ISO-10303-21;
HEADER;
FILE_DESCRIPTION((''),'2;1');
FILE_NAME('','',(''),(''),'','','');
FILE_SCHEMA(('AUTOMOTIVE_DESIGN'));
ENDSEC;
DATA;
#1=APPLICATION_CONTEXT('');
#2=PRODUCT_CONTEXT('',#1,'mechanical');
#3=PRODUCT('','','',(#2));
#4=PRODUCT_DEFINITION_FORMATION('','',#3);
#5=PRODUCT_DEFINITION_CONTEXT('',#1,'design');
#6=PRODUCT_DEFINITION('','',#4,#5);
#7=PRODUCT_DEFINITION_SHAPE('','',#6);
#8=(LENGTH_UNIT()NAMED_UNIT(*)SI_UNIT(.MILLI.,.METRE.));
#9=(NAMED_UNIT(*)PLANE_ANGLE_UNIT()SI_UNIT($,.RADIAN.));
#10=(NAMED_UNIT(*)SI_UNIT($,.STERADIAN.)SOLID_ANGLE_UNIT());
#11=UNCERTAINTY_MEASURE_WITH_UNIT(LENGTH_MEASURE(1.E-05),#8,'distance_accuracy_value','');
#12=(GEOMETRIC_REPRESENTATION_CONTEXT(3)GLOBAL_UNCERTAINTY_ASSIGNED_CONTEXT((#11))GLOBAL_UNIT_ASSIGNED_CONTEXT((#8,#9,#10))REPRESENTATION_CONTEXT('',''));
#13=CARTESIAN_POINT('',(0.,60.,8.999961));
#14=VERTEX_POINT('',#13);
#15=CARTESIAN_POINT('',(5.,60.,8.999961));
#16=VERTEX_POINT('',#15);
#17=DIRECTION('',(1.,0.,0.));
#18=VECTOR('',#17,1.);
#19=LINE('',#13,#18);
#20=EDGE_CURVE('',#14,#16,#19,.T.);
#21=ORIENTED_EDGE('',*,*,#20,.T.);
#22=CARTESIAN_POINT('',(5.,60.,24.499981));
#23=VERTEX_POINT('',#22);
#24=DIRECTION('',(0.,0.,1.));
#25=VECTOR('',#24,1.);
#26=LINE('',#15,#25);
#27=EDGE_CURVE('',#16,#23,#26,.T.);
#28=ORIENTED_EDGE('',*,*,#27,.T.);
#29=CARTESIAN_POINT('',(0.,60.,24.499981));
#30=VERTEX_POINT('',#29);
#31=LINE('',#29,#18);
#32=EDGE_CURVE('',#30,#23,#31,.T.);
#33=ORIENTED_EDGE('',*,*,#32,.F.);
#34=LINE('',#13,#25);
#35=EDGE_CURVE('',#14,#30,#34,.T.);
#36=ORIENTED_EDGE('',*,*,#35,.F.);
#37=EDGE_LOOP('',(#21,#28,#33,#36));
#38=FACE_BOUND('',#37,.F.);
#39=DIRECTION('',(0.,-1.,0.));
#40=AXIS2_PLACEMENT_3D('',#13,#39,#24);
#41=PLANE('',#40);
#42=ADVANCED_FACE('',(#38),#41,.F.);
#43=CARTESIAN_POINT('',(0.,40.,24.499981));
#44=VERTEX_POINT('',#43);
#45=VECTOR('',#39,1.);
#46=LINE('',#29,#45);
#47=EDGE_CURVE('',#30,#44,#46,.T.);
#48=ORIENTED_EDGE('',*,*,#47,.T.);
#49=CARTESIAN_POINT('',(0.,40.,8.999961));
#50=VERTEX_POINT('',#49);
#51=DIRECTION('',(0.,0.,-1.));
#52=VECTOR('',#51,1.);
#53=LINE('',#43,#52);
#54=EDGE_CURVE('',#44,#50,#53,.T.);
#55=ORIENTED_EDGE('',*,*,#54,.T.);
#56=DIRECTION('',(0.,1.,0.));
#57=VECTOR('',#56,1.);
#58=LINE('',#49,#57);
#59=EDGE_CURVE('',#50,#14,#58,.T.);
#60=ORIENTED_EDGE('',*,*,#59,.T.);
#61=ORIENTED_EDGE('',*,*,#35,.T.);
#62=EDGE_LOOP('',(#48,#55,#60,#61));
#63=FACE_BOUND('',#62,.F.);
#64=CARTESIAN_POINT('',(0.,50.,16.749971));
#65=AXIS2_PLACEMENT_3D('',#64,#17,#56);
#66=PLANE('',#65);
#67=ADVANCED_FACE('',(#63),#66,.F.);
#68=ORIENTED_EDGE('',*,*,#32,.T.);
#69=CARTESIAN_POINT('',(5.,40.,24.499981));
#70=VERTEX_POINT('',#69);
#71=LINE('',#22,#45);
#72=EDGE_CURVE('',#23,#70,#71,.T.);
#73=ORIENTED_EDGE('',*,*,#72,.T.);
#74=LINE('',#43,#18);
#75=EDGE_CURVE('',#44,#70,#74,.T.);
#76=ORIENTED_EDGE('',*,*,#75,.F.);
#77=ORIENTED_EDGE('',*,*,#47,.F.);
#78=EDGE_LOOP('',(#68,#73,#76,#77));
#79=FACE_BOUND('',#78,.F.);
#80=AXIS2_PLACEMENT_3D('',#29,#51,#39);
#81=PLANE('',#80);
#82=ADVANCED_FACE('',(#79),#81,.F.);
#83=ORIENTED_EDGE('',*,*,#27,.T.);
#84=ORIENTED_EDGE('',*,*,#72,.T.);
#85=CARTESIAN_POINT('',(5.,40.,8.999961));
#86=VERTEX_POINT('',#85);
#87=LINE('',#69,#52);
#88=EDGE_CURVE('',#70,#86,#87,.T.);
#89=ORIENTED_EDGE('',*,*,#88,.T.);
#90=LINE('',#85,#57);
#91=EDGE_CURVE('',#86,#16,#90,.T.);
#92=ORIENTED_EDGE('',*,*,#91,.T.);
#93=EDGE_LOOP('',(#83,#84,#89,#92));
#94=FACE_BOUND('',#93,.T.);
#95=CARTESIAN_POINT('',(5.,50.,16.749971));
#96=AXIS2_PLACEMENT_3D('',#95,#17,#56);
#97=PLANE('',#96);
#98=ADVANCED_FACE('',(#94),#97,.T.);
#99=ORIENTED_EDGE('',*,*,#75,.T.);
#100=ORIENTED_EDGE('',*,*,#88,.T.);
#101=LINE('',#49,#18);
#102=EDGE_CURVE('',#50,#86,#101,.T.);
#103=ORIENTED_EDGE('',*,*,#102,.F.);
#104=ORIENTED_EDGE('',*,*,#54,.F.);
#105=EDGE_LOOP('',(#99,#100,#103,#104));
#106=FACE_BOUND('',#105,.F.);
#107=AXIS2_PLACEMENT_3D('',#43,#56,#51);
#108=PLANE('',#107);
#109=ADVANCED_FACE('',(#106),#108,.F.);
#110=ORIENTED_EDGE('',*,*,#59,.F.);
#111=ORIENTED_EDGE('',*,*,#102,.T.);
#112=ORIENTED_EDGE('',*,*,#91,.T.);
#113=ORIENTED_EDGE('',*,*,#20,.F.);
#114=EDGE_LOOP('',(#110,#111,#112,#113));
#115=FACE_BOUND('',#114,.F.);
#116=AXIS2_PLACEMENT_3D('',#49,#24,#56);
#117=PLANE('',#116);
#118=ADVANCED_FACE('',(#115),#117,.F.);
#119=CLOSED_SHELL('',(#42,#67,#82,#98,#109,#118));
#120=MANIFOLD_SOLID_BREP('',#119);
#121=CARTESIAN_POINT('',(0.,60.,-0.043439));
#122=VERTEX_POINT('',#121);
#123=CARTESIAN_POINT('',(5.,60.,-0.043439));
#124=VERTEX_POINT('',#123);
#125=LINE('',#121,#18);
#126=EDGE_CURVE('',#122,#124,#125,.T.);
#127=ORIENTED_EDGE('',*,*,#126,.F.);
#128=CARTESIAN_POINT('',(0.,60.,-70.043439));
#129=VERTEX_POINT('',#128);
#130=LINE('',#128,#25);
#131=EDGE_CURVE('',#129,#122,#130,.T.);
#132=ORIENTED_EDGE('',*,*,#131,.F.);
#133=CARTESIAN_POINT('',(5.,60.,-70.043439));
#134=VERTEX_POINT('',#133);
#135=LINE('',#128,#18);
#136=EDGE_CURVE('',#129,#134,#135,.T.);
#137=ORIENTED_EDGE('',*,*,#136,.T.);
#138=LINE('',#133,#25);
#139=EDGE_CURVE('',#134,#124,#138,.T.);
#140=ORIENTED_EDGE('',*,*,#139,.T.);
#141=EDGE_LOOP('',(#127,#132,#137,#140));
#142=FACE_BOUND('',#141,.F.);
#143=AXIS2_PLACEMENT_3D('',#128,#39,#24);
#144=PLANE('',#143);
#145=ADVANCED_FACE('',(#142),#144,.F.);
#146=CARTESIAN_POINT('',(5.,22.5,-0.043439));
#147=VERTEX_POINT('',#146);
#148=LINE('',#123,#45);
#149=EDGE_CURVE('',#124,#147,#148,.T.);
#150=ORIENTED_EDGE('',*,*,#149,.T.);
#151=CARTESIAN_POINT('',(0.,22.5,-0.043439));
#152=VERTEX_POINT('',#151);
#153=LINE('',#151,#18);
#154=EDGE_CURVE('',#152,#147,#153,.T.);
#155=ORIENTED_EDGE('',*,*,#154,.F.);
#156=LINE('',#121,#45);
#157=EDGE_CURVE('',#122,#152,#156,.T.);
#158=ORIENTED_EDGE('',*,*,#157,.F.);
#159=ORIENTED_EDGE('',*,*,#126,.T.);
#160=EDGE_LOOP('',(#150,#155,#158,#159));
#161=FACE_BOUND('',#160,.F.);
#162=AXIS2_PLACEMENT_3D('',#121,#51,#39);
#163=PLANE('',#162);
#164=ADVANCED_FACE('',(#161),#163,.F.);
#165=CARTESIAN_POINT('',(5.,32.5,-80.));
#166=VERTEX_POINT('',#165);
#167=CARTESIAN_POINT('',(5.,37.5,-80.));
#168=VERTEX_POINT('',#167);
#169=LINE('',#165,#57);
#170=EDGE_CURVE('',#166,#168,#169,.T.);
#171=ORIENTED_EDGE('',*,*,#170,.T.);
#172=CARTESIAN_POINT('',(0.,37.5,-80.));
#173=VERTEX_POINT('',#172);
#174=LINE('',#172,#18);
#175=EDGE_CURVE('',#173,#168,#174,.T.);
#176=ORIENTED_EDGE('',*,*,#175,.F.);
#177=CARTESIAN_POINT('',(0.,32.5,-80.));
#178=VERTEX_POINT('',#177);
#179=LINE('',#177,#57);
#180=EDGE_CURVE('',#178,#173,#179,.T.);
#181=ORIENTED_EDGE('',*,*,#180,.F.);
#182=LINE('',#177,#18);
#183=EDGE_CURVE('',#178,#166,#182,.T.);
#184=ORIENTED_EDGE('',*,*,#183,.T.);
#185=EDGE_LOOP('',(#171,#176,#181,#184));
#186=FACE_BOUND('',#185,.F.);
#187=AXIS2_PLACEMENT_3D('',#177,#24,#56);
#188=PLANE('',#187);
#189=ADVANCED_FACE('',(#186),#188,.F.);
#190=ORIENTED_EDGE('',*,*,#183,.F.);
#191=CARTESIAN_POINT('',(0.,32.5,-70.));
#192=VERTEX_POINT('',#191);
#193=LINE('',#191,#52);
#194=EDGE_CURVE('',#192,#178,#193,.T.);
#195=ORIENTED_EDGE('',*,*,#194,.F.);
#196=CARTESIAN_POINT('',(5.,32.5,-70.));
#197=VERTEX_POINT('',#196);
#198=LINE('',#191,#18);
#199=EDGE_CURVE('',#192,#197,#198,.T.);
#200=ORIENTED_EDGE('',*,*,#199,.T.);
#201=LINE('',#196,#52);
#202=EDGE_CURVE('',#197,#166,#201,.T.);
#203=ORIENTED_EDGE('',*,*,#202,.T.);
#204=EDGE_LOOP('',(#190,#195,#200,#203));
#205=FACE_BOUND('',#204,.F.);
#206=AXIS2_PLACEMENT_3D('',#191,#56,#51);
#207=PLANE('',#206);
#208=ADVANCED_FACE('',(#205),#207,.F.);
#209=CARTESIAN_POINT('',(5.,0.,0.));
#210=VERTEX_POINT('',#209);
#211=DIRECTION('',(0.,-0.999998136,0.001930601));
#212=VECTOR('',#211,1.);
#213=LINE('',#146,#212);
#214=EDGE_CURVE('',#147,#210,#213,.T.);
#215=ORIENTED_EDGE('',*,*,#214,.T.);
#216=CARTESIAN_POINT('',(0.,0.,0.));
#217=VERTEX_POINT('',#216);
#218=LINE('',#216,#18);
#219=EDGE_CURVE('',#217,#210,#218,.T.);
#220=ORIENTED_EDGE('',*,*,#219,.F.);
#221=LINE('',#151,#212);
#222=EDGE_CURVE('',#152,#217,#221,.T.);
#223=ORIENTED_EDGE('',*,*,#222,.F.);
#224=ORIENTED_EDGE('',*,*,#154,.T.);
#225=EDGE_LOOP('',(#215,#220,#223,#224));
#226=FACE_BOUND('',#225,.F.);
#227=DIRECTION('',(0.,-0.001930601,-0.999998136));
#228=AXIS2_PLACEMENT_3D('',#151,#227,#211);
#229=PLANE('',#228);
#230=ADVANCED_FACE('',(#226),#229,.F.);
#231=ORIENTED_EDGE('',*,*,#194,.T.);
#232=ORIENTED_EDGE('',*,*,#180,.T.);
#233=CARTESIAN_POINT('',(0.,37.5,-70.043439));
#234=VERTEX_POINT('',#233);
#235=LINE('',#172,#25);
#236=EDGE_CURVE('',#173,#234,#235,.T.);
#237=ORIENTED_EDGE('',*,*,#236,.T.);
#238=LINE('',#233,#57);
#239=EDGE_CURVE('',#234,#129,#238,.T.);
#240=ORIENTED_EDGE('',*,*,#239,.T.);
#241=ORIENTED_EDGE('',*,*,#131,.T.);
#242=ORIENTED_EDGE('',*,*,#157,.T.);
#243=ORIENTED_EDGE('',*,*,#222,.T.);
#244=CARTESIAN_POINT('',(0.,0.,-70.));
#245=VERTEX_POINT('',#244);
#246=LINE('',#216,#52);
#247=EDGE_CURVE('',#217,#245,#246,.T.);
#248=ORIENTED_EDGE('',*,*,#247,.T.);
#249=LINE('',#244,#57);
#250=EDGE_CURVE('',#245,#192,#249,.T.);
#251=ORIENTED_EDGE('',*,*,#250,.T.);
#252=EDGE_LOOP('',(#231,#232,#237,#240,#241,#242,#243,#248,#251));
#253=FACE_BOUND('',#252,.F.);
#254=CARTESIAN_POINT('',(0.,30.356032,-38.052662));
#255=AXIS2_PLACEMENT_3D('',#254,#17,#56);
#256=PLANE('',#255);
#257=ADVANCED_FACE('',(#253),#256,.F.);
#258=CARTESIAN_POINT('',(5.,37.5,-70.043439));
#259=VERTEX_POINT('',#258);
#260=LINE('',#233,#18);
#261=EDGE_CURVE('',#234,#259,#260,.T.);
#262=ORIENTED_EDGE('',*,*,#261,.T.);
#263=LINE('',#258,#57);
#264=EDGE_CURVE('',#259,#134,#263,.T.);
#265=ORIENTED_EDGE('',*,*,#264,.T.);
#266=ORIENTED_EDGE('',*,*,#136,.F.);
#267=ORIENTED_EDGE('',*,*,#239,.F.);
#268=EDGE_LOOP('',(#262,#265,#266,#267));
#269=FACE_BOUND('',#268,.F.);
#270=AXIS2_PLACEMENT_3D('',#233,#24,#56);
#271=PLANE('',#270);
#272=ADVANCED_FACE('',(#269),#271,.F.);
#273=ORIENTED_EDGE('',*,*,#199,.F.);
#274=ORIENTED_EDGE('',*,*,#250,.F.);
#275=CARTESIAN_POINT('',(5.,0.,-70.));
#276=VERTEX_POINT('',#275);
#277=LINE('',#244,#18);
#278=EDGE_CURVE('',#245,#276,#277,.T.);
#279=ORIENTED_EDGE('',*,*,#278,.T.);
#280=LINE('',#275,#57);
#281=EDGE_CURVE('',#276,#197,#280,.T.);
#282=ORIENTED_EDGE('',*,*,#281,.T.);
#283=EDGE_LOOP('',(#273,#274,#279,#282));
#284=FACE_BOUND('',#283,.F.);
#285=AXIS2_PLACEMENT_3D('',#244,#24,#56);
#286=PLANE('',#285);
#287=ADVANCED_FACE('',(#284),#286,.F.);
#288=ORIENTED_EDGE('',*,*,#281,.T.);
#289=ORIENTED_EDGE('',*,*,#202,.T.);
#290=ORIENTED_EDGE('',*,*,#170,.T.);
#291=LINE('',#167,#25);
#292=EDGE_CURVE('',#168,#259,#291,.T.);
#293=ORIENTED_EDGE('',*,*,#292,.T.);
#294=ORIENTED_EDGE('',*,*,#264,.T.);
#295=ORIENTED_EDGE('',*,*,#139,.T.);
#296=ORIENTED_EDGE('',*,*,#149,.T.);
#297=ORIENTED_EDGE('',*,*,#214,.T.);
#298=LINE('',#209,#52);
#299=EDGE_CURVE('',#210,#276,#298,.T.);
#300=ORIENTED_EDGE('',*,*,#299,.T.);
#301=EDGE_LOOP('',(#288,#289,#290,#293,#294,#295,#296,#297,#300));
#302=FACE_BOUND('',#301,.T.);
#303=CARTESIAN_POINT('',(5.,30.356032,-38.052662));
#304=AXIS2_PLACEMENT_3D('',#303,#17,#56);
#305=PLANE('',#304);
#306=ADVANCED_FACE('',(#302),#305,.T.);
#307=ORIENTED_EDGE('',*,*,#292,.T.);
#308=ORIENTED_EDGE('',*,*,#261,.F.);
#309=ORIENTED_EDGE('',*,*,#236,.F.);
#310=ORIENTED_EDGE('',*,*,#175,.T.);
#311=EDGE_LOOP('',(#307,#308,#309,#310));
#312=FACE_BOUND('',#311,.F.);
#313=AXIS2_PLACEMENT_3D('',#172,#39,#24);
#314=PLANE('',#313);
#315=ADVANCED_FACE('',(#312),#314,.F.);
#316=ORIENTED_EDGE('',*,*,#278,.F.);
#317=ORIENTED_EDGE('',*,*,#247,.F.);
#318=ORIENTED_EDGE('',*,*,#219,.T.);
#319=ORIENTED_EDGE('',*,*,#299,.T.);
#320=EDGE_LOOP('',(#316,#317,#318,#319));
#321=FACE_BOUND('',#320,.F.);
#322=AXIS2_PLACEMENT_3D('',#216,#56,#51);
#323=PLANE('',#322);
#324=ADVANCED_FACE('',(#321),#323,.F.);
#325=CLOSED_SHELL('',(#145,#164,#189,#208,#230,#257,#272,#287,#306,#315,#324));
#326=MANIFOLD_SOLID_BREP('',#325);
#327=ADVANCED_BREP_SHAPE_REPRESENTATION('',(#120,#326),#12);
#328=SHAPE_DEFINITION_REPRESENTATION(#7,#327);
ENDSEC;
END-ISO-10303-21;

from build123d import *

# Parameters (mm, degrees)
F1_DEPTH = 5


# Not quite as in the source:
# - a feature names something its author has since deleted; it is built from what else it names


with BuildPart() as f1:
    # F0 (on Right) → F1 (new body)
    with BuildSketch(Plane.YZ):
        Polygon((22.5, -0.0434386059), (0, 0), (0, -70), (12, -70), (12.4011761725, -70), (32.5, -70), (32.5, -80), (37.5, -80), (37.5, -70.0434386059), (60, -70.0434386059), (60, -0.0434386059), align=None)
    extrude(amount=F1_DEPTH)


with BuildPart() as f1b:
    # F0 (on Right) → F1, piece 2 (new body)
    with BuildSketch(Plane.YZ):
        Polygon((40, 8.9999613941), (42.5, 8.9999613941), (60, 8.9999613941), (60, 24.499980697), (42.5, 24.499980697), (40, 24.499980697), align=None)
    extrude(amount=F1_DEPTH)


solid = Compound([f1.part, f1b.part])
